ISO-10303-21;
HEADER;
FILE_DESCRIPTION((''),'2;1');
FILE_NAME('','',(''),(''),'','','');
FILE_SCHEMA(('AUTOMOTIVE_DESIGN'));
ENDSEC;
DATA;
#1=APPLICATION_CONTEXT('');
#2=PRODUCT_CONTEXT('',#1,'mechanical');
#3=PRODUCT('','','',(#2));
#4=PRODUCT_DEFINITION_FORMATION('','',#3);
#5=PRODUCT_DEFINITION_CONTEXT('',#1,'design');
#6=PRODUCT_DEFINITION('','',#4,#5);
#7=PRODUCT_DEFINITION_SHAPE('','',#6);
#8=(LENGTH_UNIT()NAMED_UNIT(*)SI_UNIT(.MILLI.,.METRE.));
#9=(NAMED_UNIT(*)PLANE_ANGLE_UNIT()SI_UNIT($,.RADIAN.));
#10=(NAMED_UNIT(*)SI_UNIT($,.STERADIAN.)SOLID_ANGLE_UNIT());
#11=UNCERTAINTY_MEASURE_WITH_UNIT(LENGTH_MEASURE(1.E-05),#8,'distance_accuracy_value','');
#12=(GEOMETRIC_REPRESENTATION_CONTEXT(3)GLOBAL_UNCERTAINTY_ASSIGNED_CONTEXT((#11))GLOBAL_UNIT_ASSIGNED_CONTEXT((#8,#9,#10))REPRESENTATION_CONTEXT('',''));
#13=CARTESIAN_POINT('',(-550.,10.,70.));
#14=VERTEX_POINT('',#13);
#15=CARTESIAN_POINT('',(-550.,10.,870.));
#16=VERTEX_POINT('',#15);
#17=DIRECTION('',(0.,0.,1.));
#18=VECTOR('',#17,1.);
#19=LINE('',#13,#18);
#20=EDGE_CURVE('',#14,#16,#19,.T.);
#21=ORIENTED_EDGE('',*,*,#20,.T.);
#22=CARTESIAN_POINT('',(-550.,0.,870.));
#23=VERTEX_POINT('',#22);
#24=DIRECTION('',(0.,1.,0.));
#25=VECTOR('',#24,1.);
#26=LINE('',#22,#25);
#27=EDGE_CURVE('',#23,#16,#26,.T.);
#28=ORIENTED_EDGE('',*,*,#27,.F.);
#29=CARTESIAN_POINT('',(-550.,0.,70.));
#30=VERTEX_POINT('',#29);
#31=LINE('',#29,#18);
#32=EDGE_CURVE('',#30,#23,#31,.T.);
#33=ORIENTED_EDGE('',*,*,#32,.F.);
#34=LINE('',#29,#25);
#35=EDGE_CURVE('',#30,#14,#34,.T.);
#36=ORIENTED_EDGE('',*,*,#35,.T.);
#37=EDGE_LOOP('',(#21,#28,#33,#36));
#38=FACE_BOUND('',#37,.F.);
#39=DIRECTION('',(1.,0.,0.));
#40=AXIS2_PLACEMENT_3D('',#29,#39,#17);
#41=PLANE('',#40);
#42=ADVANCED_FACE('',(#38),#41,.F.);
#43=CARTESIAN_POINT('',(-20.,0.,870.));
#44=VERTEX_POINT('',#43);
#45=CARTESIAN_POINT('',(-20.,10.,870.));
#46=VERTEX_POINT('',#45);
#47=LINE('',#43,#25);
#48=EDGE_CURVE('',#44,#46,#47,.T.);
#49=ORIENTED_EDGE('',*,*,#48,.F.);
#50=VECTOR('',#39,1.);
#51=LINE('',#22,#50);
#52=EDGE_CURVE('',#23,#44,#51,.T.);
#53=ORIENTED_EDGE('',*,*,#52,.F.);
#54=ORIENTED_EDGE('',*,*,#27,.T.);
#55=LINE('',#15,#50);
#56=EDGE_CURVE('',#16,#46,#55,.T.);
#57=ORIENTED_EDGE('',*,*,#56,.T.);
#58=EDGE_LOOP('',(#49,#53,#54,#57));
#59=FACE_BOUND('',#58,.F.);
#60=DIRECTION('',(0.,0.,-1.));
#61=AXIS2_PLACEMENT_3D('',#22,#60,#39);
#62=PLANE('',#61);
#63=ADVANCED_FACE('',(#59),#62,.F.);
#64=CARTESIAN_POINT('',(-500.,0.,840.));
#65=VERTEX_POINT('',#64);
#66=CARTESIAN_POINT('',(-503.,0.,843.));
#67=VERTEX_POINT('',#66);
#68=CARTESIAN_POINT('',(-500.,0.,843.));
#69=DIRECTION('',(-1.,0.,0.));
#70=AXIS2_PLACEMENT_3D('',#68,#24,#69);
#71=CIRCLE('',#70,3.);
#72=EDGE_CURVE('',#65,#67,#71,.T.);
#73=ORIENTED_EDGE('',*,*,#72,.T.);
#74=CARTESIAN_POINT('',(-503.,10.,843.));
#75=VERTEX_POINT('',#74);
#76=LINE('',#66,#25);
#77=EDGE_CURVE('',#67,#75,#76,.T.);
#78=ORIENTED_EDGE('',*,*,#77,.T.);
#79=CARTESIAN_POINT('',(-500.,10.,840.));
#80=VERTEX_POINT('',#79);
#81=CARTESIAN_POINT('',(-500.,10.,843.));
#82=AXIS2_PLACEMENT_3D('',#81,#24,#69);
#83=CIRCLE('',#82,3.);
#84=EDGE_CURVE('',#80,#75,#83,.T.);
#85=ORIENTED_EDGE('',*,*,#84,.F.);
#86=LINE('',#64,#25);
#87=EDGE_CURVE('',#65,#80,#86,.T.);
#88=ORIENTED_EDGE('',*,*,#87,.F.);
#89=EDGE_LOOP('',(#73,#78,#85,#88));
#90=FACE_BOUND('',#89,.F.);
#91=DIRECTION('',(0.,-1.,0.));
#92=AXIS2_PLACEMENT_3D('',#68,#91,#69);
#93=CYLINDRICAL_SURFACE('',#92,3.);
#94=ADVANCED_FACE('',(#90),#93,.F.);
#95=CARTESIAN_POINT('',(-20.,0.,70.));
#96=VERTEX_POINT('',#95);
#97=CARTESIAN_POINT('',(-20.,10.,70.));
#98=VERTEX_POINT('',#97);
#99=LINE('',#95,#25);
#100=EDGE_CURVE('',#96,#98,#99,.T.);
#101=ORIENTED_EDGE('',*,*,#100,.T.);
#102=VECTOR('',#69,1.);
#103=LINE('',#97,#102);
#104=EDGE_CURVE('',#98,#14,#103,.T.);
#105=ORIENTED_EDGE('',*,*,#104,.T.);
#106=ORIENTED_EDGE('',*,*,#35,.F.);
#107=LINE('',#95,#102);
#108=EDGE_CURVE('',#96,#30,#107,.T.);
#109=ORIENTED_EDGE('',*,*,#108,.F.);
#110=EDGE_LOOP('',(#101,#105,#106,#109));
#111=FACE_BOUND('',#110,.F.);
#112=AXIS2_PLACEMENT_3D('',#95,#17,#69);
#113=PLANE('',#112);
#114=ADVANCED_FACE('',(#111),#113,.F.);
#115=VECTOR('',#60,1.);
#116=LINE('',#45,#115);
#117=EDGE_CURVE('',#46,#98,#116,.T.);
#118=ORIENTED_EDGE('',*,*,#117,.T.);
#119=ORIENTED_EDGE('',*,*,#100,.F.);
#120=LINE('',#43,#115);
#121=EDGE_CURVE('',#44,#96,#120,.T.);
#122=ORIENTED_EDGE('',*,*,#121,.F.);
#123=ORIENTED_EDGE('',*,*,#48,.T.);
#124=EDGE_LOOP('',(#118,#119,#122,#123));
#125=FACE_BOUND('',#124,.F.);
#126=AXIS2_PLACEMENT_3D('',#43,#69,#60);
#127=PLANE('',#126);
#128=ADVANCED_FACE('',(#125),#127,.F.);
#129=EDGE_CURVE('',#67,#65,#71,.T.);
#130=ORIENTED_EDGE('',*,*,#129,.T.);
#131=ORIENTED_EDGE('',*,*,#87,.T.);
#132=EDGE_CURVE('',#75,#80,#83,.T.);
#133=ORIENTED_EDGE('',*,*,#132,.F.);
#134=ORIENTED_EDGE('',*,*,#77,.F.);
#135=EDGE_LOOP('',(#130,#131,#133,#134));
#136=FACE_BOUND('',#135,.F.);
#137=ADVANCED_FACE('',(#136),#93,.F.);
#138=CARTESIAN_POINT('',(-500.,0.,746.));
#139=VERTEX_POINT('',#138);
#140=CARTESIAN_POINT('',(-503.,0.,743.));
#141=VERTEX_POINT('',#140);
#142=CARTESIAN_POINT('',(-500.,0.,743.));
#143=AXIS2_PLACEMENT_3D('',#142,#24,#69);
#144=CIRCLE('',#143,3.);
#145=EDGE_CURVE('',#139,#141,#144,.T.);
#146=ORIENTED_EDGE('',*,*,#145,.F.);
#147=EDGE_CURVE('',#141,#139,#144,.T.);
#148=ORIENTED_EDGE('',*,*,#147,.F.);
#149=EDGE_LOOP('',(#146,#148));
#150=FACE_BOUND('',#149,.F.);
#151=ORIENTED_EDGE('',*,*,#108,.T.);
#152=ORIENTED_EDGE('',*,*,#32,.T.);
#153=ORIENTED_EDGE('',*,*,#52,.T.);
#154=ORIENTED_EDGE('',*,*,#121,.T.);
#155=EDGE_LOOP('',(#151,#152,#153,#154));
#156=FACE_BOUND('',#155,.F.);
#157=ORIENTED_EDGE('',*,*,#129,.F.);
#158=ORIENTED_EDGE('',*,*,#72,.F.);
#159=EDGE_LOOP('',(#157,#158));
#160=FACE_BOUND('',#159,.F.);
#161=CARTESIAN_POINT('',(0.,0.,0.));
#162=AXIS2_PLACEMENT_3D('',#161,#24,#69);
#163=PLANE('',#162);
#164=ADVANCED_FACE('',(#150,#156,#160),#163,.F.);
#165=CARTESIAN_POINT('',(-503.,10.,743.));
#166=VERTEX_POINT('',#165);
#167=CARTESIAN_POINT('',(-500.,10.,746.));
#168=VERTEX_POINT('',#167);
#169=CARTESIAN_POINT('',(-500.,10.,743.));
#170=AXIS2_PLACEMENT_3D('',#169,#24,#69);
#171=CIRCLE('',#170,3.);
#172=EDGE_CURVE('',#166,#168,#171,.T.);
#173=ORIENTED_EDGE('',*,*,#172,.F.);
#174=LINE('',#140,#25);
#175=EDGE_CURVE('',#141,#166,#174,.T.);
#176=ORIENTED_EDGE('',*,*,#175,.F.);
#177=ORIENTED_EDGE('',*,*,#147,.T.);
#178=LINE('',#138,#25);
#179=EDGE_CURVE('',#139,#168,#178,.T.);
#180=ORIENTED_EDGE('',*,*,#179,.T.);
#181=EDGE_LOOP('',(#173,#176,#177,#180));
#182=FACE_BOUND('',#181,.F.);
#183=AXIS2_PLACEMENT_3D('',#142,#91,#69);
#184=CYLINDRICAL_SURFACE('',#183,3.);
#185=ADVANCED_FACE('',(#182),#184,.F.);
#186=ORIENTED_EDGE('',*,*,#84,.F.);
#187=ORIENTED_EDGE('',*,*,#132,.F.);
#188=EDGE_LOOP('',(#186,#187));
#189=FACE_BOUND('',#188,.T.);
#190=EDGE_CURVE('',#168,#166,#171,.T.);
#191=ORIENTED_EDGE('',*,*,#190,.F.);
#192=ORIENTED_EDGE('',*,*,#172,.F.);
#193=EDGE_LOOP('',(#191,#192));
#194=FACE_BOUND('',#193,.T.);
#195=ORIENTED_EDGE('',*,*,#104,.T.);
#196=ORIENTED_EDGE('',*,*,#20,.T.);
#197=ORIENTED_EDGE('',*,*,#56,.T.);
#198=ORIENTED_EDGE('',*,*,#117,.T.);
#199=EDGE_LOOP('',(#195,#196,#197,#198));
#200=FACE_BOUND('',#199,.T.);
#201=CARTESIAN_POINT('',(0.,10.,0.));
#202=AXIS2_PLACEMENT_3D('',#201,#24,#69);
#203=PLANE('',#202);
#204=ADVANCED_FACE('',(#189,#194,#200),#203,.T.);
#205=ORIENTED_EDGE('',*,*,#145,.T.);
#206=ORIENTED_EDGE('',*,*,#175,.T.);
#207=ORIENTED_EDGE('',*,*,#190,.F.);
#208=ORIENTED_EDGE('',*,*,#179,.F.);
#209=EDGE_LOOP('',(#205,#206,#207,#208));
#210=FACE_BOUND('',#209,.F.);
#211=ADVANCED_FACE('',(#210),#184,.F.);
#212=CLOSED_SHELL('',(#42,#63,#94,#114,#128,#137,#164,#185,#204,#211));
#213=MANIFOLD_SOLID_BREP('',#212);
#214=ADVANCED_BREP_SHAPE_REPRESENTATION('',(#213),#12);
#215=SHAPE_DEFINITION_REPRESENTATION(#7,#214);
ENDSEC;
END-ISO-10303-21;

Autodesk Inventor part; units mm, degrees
ref_plane "YZ Plane" through (0, 0, 0) normal (1, 0, 0) x (0, 1, 0)
ref_plane "XZ Plane" through (0, 0, 0) normal (0, 1, 0) x (-1, 0, 0)
ref_plane "XY Plane" through (0, 0, 0) normal (0, 0, 1) x (1, 0, 0)
sketch "Sketch8" plane through (0, 0, 0) normal (0, 1, 0) x (-1, 0, 0)
  line L0 (0, 0) -> (10, 0)
  line L1 (0, 0) -> (0, 70)
  line L2 (0, 70) -> (20, 70)
  line L3 (20, 70) -> (550, 70)
  line L4 (550, 70) -> (550, 870)
  line L5 (550, 870) -> (20, 870)
  line L6 (20, 870) -> (20, 70)
  line L7 (550, 790) -> (20, 790) construction
  circle A0 centre (500, 843) radius 3
  line L8 (500, 843) -> (500, 743)
  circle A1 centre (500, 743) radius 3
  dimension "espesor" = 10
  dimension "d38" = 70
  dimension "d39" = 20
  dimension "ancho_m" = 530
  dimension "h_inf" = 800
  dimension "d42" = 80
  dimension "d43" = 6
  dimension "d44" = 50
  dimension "d45" = 50
  dimension "d48" = 100
  dimension "d49" = 6
extrude "Extrusion8" add sketch "Sketch8" along normal blind 10
equation "\"d39\" = 2 * espesor"
equation "\"d42\" = 0.1 * h_inf"
equation "\"d46\" = espesor"
properties part number "puerta_lavaplatos"
